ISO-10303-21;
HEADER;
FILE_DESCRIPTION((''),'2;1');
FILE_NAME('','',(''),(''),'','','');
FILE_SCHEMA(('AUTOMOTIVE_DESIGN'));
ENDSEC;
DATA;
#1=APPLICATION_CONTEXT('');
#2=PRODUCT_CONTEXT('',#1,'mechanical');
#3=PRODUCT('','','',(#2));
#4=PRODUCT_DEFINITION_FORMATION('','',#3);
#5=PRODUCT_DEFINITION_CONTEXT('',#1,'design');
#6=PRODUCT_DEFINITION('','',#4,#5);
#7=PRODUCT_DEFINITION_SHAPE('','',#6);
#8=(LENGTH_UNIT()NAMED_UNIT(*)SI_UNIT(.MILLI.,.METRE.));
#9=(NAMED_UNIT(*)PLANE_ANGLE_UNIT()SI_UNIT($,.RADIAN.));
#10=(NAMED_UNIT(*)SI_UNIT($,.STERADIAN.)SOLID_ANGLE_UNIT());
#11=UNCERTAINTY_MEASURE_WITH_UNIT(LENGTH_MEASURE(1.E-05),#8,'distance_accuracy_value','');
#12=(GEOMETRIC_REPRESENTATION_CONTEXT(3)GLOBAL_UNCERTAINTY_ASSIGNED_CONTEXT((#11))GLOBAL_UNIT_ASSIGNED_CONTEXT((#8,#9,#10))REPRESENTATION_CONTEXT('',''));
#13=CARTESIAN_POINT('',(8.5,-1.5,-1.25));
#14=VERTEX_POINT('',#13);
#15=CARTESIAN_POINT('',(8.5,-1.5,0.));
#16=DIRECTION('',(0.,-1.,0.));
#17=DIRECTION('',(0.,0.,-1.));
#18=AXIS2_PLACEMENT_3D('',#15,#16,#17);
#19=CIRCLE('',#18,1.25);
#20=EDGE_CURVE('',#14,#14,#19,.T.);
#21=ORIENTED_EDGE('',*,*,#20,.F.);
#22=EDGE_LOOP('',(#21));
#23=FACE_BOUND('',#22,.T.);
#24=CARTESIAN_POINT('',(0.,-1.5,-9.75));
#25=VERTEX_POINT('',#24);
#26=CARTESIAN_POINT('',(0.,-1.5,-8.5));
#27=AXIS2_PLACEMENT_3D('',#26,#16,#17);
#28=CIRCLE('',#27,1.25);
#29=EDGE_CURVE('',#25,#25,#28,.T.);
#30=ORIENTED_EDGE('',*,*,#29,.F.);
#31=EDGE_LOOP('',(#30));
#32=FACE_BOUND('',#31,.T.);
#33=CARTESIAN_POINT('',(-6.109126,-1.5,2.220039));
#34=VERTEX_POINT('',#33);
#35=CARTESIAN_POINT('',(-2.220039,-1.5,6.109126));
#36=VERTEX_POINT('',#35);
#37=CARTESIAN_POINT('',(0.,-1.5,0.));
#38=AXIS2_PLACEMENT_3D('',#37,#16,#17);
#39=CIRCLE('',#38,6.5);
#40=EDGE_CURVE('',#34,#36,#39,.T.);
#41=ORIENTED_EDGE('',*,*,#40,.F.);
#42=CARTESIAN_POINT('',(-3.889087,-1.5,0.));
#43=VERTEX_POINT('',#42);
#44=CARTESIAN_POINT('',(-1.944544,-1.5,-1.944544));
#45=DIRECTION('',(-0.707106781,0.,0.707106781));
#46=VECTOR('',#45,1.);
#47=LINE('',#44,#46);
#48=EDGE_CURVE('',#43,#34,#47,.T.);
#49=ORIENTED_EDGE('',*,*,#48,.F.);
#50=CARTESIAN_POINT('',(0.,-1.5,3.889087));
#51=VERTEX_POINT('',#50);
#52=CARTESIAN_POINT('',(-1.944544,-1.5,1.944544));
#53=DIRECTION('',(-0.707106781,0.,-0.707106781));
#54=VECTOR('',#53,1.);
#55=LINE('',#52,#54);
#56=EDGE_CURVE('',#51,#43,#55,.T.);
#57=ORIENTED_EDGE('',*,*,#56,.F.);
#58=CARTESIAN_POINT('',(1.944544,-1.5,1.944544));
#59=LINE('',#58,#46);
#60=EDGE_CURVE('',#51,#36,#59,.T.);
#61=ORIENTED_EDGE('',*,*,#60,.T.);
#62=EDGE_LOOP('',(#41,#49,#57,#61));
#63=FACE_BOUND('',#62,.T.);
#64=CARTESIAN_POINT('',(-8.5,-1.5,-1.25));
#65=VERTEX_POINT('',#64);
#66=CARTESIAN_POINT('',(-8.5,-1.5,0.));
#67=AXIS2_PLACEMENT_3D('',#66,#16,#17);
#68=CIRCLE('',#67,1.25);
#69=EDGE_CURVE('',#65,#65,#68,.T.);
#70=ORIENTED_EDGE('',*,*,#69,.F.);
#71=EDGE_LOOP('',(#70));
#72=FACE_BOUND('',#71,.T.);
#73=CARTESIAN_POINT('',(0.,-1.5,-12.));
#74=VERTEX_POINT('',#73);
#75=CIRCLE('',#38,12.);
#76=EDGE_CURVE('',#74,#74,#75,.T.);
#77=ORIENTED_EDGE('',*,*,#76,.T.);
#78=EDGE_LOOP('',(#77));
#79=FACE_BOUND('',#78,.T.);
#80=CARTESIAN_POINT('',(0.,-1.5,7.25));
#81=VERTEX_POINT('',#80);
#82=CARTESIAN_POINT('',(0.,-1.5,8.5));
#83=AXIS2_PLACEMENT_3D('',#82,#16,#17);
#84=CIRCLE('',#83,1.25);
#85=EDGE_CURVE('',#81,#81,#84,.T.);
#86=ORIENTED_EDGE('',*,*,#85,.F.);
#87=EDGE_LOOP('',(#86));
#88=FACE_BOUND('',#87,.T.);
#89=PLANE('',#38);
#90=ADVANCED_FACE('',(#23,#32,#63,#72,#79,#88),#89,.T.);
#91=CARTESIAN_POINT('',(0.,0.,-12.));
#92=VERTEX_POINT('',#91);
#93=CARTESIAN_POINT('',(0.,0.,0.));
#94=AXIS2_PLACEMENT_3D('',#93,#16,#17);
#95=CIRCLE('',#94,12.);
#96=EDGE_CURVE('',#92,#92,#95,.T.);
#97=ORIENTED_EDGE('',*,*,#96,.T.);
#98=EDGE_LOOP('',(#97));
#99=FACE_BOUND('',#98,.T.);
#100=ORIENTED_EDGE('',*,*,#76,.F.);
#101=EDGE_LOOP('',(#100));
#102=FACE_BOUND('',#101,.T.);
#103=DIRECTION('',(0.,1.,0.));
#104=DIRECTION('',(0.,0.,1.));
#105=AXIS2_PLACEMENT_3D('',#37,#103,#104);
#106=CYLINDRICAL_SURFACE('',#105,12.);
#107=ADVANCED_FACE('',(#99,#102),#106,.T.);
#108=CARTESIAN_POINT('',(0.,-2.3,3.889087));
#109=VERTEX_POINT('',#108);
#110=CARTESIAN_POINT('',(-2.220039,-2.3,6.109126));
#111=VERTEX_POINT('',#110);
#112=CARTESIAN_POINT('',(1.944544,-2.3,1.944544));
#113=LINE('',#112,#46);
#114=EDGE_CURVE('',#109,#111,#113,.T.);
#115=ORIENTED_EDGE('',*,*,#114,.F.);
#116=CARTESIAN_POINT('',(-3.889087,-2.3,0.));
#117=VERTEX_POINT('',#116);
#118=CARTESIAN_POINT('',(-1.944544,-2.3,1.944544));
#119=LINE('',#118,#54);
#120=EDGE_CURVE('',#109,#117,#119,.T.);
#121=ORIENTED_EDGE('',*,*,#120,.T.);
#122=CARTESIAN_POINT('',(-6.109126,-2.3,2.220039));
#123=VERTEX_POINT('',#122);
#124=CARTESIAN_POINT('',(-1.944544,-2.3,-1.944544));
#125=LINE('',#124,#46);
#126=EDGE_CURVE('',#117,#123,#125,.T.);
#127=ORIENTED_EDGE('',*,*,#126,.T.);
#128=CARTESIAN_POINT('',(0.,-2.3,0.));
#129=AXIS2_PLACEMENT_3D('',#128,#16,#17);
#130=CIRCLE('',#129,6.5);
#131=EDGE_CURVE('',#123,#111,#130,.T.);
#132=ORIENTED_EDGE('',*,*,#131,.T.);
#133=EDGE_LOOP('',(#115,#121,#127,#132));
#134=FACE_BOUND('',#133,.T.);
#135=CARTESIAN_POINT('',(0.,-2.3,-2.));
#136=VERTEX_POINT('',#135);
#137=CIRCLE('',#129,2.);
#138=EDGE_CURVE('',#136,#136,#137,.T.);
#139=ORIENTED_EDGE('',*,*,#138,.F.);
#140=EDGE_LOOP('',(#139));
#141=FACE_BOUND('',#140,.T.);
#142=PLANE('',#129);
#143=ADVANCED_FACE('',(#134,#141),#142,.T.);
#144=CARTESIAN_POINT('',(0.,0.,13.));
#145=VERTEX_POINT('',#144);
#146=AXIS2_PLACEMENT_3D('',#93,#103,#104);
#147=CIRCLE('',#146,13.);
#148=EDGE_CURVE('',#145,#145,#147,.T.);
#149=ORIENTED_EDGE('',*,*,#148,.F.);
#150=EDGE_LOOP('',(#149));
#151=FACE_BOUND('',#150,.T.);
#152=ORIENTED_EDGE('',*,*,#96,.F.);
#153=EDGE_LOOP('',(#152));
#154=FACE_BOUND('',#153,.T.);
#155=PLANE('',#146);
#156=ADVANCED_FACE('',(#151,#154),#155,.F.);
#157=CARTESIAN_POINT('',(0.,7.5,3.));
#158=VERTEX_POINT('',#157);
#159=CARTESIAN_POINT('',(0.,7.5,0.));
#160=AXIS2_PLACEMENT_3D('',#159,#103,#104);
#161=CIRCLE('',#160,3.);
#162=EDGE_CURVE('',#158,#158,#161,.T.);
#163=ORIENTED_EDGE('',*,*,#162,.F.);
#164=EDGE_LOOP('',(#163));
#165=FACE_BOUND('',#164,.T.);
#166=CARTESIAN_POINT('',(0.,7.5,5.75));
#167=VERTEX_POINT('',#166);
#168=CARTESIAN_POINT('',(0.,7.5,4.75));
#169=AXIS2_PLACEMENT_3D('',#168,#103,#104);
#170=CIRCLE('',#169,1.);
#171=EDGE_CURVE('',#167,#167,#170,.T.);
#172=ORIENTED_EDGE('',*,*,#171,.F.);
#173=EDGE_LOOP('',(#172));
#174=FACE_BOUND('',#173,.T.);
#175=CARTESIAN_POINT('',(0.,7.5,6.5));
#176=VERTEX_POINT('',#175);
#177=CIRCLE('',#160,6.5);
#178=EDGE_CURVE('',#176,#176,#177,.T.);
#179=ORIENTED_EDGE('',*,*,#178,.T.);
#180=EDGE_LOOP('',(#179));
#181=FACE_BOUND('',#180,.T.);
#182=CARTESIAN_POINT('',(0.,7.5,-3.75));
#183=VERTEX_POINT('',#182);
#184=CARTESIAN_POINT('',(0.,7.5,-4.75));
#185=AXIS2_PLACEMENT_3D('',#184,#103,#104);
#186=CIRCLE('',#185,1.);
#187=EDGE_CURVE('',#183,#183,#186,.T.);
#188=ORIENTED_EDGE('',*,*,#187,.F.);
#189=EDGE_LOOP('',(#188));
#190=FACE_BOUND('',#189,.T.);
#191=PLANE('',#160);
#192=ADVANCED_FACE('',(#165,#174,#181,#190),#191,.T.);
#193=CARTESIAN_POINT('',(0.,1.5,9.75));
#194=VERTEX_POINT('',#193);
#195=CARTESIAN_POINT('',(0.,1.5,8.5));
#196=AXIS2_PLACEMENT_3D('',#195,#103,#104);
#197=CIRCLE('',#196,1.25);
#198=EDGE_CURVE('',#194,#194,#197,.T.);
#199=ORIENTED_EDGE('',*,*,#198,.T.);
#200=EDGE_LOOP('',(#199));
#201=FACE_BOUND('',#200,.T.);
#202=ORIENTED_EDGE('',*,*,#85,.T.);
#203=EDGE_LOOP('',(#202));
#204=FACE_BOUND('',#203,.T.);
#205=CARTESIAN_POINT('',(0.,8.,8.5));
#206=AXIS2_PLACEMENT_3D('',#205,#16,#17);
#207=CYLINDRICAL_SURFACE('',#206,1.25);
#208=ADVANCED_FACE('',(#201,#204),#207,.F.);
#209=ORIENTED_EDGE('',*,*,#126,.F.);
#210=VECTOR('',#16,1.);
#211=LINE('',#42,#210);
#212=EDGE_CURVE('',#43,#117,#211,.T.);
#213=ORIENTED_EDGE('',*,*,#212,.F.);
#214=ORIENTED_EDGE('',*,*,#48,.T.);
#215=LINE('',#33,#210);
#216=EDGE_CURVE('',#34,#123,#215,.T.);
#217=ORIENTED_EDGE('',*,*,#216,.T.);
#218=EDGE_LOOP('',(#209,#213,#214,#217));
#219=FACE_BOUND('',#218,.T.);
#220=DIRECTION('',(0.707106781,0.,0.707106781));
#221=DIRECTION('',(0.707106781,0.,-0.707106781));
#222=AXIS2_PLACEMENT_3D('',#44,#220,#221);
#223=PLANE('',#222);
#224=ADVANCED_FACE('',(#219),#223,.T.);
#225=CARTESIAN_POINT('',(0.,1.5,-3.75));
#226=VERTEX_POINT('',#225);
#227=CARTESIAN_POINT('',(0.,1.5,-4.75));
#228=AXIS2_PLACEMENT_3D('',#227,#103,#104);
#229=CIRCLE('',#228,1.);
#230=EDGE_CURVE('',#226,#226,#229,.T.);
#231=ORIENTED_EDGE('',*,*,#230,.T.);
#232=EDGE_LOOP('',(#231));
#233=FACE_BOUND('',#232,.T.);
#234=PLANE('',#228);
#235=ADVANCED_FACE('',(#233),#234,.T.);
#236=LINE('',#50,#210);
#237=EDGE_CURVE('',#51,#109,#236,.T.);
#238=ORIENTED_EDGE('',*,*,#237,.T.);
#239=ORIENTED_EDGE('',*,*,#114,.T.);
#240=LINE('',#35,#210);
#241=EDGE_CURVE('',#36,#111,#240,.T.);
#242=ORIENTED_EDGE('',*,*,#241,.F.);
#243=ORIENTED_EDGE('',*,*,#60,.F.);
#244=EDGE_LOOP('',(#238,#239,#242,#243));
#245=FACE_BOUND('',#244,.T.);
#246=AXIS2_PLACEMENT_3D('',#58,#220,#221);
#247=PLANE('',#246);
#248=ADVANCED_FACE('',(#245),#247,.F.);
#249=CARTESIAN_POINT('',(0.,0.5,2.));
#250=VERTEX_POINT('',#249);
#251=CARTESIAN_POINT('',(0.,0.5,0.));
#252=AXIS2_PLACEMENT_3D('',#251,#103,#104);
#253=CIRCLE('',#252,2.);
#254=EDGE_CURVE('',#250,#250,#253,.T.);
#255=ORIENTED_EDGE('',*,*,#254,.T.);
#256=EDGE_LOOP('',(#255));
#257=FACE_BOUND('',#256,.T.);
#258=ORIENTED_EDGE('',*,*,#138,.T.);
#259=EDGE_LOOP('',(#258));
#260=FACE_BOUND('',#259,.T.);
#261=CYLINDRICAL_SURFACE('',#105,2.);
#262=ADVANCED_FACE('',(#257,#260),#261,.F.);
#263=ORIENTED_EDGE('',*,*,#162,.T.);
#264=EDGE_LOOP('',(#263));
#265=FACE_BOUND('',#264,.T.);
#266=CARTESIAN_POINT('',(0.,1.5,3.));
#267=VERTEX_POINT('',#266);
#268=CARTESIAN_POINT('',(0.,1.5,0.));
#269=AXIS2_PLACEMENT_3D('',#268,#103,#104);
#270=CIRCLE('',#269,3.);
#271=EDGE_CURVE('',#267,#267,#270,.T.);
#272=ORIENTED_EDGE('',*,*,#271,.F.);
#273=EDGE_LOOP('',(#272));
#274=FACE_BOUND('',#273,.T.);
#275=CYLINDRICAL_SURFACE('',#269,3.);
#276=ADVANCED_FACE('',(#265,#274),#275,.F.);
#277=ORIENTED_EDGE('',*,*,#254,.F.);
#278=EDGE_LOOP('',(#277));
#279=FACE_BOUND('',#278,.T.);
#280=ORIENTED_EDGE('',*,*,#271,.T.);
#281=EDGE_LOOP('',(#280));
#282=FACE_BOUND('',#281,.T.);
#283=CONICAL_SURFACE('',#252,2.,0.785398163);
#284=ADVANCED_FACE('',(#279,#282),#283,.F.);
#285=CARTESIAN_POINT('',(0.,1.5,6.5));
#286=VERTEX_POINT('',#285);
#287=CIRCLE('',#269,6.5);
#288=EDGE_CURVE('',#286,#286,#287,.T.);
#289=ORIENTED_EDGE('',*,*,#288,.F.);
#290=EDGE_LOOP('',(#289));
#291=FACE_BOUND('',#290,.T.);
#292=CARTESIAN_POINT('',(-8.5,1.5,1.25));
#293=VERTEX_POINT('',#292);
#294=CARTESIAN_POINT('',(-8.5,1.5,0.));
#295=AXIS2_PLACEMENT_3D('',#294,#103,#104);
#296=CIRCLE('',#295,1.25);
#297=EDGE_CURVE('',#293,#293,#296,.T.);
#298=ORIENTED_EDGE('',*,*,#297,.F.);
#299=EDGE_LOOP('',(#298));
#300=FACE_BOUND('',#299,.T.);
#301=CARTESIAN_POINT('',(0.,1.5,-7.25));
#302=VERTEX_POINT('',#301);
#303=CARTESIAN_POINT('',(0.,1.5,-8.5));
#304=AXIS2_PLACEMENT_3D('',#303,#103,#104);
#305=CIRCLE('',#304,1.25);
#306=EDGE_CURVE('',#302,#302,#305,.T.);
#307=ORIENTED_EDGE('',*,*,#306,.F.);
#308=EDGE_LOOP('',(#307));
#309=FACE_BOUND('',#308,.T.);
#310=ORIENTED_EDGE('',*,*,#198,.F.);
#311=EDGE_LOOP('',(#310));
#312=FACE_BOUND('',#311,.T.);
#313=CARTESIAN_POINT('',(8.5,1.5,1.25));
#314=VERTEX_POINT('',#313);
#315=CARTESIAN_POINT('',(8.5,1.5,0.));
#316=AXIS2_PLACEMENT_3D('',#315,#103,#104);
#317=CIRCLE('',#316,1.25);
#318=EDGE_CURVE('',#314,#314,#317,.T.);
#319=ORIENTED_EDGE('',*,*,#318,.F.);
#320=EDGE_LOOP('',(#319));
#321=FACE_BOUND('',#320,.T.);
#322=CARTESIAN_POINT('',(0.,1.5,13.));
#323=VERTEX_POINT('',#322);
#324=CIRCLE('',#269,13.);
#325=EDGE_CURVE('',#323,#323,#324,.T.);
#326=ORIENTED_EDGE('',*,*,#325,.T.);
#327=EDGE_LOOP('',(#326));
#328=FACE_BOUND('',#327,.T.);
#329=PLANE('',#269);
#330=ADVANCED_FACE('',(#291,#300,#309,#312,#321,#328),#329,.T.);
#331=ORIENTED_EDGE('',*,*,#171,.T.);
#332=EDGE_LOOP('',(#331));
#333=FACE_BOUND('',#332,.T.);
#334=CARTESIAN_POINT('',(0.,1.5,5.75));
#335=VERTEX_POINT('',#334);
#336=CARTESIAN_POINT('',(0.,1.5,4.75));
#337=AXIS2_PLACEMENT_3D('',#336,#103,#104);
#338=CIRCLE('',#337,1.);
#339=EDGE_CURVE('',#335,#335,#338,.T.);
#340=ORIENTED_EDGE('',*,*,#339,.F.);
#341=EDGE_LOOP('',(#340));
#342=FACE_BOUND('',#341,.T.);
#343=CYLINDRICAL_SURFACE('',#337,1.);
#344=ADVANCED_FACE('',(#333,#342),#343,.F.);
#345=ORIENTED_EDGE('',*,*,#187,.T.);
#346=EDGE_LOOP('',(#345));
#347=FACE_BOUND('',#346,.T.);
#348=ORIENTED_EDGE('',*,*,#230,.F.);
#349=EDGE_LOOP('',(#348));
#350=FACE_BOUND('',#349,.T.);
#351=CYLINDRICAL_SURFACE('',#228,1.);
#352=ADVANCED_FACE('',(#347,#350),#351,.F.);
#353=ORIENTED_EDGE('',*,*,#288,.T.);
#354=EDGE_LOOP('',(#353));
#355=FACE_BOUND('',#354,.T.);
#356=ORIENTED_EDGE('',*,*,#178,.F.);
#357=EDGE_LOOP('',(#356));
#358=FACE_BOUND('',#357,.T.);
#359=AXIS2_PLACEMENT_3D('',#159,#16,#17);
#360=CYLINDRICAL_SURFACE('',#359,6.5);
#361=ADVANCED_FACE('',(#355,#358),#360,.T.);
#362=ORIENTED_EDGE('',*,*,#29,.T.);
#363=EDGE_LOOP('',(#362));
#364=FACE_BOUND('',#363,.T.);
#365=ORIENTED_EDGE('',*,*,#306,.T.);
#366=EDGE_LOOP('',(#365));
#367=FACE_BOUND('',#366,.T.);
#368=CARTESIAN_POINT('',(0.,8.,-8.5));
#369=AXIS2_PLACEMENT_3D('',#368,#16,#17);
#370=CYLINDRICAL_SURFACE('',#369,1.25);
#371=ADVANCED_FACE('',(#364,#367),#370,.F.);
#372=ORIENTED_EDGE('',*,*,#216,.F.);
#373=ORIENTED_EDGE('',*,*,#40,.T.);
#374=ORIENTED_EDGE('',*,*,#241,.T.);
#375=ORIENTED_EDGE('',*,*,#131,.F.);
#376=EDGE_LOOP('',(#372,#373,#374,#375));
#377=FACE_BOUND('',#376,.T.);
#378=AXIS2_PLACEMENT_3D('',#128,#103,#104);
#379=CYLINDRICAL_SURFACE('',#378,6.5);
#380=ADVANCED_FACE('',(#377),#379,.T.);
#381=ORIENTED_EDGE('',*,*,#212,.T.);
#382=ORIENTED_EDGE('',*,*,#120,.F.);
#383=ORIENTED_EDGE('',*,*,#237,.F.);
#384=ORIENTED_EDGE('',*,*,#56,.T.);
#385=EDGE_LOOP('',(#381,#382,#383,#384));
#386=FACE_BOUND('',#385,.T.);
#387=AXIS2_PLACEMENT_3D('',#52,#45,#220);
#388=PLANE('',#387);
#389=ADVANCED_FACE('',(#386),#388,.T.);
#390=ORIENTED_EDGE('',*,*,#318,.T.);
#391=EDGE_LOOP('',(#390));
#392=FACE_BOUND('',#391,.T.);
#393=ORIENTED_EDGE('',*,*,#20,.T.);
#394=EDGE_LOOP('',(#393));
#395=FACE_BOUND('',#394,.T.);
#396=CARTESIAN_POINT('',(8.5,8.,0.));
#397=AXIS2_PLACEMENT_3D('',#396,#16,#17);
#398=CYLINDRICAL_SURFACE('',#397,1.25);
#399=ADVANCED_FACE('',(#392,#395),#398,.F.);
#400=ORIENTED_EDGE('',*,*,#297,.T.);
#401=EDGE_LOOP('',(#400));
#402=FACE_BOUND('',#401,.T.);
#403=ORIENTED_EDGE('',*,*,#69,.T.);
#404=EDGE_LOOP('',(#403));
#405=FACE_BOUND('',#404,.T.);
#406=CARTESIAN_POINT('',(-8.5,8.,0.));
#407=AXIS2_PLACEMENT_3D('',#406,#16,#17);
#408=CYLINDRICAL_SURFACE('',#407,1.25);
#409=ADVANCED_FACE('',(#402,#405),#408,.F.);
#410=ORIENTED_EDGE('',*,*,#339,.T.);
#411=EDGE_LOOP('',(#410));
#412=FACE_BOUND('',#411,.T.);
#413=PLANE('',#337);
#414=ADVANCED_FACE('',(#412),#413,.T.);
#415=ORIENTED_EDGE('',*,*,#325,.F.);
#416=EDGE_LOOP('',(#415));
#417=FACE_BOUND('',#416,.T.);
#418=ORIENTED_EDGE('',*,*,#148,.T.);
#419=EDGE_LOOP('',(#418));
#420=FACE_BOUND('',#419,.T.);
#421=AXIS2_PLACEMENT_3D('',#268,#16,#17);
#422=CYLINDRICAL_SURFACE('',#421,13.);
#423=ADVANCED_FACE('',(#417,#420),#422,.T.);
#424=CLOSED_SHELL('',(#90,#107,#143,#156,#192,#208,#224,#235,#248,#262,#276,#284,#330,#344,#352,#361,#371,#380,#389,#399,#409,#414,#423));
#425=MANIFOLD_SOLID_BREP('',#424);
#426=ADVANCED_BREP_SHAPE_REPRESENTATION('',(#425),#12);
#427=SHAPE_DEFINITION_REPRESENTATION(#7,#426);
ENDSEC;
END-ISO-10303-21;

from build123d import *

# Parameters (mm, degrees)
SKETCH1_R           = 13
BOSS_EXTRUDE1_DEPTH = 1.5
SKETCH2_R           = 6.5
BOSS_EXTRUDE2_DEPTH = 6
SKETCH3_R           = 3
CUT_EXTRUDE1_DEPTH  = 6
SKETCH4_R           = 1.25
CUT_EXTRUDE5_DEPTH  = 8
SKETCH6_R           = 1
CUT_EXTRUDE6_DEPTH  = 6
SKETCH7_R           = 12
SKETCH7_R_2         = 2
BOSS_EXTRUDE3_DEPTH = 1.5
SKETCH8_R           = 6.5
SKETCH8_R_2         = 2
BOSS_EXTRUDE4_DEPTH = 0.8
CUT_EXTRUDE8_START  = -10.8
SKETCH9_R           = 1.25
CUT_EXTRUDE8_DEPTH  = 10.8
CUT_EXTRUDE9_START  = -10.8
SKETCH10_R          = 2
CUT_EXTRUDE9_DEPTH  = 10.8
CUT_EXTRUDE10_DEPTH = 0.8
CHAMFER4_SIZE       = 1


with BuildPart() as part:
    # Sketch1 → Boss-Extrude1 (new body)
    with BuildSketch(Plane(origin=(0, 0, 0), x_dir=(1, 0, 0), z_dir=(0, 1, 0))):
        with Locations(Location((0, 0, 0), (0, 0, 270))):
            Circle(SKETCH1_R)
    extrude(amount=BOSS_EXTRUDE1_DEPTH)

    # Sketch2 → Boss-Extrude2 (add)
    with BuildSketch(Plane(origin=(0, 1.5, 0), x_dir=(1, 0, 0), z_dir=(0, 1, 0))):
        with Locations(Location((0, 0, 0), (0, 0, 270))):
            Circle(SKETCH2_R)
    extrude(amount=BOSS_EXTRUDE2_DEPTH)

    # Sketch3 → Cut-Extrude1 (cut)
    with BuildSketch(Plane(origin=(0, 7.5, 0), x_dir=(1, 0, 0), z_dir=(0, 1, 0))):
        with Locations(Location((0, 0, 0), (0, 0, 270))):
            Circle(SKETCH3_R)
    extrude(amount=-CUT_EXTRUDE1_DEPTH, mode=Mode.SUBTRACT)

    # Sketch4 → Cut-Extrude5 (cut, symmetric)
    with BuildSketch(Plane.XZ):
        with Locations(Location((-8.5, 0, 0), (0, 0, 90))):
            Circle(SKETCH4_R)
        with Locations(Location((0, 8.5, 0), (0, 0, 90))):
            Circle(SKETCH4_R)
        with Locations(Location((8.5, 0, 0), (0, 0, 90))):
            Circle(SKETCH4_R)
        with Locations(Location((0, -8.5, 0), (0, 0, 90))):
            Circle(SKETCH4_R)
    extrude(amount=CUT_EXTRUDE5_DEPTH, both=True, mode=Mode.SUBTRACT)

    # Sketch6 → Cut-Extrude6 (cut)
    with BuildSketch(Plane(origin=(0, 7.5, 0), x_dir=(1, 0, 0), z_dir=(0, 1, 0))):
        with Locations(Location((0, 4.75, 0), (0, 0, 270))):
            Circle(SKETCH6_R)
        with Locations(Location((0, -4.75, 0), (0, 0, 270))):
            Circle(SKETCH6_R)
    extrude(amount=-CUT_EXTRUDE6_DEPTH, mode=Mode.SUBTRACT)

    # Sketch7 → Boss-Extrude3 (add)
    with BuildSketch(Plane.XZ):
        with Locations(Location((0, 0, 0), (0, 0, 270))):
            Circle(SKETCH7_R)
        with Locations(Location((0, 0, 0), (0, 0, 270))):
            Circle(SKETCH7_R_2, mode=Mode.SUBTRACT)
    extrude(amount=BOSS_EXTRUDE3_DEPTH)

    # Sketch8 → Boss-Extrude4 (add)
    with BuildSketch(Plane.XZ.offset(1.5)):
        with Locations(Location((0, 0, 0), (0, 0, 90))):
            Circle(SKETCH8_R)
        with Locations(Location((0, 0, 0), (0, 0, 270))):
            Circle(SKETCH8_R_2, mode=Mode.SUBTRACT)
    extrude(amount=BOSS_EXTRUDE4_DEPTH)

    # Sketch9 → Cut-Extrude8 (cut)
    with BuildSketch(Plane(origin=(0, 0, 0), x_dir=(1, 0, 0), z_dir=(0, 1, 0)).offset(CUT_EXTRUDE8_START)):
        with Locations(Location((8.5, 0, 0), (0, 0, 90))):
            Circle(SKETCH9_R)
        with Locations(Location((0, -8.5, 0), (0, 0, 90))):
            Circle(SKETCH9_R)
        with Locations(Location((-8.5, 0, 0), (0, 0, 90))):
            Circle(SKETCH9_R)
        with Locations(Location((0, 8.5, 0), (0, 0, 90))):
            Circle(SKETCH9_R)
    extrude(amount=CUT_EXTRUDE8_DEPTH, mode=Mode.SUBTRACT)

    # Sketch10 → Cut-Extrude9 (cut)
    with BuildSketch(Plane.XZ.offset(CUT_EXTRUDE9_START)):
        with Locations(Location((0, 0, 0), (0, 0, 90))):
            Circle(SKETCH10_R)
    extrude(amount=CUT_EXTRUDE9_DEPTH, mode=Mode.SUBTRACT)

    # Sketch11 → Cut-Extrude10 (cut)
    with BuildSketch(Plane.XZ.offset(2.3)):
        with BuildLine():
            Line((-6.109126461, 2.220039164), (-3.889087297, 0))
            Line((-3.889087297, 0), (0, 3.889087297))
            Line((0, 3.889087297), (-2.220039164, 6.109126461))
            ThreePointArc((-2.220039164, 6.109126461), (-4.596194078, 4.596194078), (-6.109126461, 2.220039164))
        make_face()
    extrude(amount=-CUT_EXTRUDE10_DEPTH, mode=Mode.SUBTRACT)

    # Chamfer4
    chamfer4_edges = [part.edges().sort_by_distance(p)[0] for p in [
        (0, 1.5, -2),
    ]]
    chamfer(chamfer4_edges, length=CHAMFER4_SIZE - 0.0001)  # a hair under: the kernel refuses the full size


solid = part.part
